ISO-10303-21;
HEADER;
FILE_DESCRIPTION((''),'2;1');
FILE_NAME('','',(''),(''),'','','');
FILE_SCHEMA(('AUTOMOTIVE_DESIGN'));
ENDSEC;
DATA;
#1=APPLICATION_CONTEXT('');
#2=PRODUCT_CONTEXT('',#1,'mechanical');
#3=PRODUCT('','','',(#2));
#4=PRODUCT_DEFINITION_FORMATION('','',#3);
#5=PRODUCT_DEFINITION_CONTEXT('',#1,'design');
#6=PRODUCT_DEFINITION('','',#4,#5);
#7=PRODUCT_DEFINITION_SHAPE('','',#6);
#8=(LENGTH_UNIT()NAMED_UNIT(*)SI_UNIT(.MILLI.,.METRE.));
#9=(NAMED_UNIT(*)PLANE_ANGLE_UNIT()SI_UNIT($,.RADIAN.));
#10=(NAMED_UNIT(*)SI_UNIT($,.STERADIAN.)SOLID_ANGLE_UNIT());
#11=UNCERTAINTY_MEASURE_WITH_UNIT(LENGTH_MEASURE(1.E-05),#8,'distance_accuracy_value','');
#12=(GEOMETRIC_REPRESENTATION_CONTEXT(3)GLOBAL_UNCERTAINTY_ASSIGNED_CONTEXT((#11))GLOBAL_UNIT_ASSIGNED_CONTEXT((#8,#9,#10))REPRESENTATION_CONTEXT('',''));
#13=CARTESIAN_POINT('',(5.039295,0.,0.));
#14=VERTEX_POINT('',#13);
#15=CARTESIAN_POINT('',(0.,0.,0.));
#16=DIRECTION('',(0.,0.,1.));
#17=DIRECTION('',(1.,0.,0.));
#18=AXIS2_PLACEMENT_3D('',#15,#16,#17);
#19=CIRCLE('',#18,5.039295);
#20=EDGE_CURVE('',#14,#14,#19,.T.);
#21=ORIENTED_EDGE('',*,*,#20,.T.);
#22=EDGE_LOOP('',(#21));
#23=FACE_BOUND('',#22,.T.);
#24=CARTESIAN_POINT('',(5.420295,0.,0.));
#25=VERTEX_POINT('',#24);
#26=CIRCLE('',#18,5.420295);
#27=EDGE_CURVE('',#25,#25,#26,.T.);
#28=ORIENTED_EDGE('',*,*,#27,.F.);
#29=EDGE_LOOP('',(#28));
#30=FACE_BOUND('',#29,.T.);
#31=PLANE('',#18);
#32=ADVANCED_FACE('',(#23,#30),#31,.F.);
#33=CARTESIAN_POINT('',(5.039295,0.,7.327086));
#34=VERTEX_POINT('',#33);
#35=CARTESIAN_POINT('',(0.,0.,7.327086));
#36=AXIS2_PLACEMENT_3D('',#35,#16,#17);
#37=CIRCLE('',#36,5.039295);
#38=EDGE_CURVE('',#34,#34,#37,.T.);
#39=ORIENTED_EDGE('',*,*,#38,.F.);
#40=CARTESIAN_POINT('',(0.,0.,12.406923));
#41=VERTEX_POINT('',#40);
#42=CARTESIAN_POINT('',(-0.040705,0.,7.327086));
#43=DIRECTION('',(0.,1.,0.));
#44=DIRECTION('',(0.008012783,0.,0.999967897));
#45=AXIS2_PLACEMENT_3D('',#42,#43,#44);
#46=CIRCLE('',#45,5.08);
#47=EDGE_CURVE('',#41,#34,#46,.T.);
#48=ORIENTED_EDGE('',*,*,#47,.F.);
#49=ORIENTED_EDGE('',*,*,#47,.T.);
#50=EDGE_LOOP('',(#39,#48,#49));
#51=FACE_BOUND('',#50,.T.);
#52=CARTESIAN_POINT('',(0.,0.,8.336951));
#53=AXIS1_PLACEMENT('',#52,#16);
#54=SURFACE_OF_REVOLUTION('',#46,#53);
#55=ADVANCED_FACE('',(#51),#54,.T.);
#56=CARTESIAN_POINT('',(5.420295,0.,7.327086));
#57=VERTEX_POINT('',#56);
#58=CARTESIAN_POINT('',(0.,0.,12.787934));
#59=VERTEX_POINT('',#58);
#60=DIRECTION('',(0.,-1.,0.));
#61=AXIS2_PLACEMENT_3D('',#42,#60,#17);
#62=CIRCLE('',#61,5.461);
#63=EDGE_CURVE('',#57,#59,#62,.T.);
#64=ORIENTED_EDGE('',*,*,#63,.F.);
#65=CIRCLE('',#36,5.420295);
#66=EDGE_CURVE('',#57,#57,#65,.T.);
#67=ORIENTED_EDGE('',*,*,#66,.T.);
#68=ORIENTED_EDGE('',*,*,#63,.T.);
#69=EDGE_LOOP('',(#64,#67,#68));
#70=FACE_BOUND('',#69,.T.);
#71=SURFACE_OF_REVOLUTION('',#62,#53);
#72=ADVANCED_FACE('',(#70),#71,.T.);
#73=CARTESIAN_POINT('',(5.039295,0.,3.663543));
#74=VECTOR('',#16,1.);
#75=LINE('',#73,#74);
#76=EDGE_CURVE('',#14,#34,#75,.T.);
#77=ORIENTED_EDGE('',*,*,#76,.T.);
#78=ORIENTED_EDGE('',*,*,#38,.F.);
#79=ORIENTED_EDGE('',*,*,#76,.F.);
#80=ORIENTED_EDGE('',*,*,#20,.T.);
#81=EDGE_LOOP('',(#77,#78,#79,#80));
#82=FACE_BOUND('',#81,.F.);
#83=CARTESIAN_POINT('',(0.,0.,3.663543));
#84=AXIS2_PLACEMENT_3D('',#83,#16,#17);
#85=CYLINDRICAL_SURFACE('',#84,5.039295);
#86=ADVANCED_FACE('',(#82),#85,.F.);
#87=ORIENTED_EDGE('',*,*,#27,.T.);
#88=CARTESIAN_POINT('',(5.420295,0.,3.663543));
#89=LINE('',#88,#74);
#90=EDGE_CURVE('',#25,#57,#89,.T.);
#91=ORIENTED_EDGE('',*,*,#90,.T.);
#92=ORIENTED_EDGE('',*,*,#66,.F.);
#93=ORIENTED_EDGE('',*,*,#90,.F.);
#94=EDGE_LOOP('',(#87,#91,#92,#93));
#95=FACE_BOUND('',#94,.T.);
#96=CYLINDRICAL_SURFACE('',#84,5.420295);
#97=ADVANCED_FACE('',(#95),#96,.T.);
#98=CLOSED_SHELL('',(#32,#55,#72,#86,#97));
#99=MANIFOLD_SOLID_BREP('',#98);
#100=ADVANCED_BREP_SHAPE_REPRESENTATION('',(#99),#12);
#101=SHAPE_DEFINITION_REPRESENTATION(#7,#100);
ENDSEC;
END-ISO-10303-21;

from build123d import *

# Parameters (mm, degrees)
F0_W = 0.381
F0_H = 7.3270857248


# Not quite as in the source:
# - a feature names something its author has since deleted; it is built from what else it names


with BuildPart() as f1:
    # F0 (on Front) → F1 (revolve)
    with BuildSketch(Plane.XZ):
        with BuildLine():
            ThreePointArc((0, 12.4069226423), (3.5657601658, 10.9047678598), (5.0392950625, 7.3270857248))
            Line((5.0392950625, 7.3270857248), (5.4202950625, 7.3270857248))
            ThreePointArc((5.4202950625, 7.3270857248), (3.8351698453, 11.1741775704), (0, 12.7879340205))
            Line((0, 12.7879340205), (0, 12.4069226423))
        make_face()
        with Locations((5.2297950625, 3.6635428624)):
            Rectangle(F0_W, F0_H)
    revolve(axis=Axis((0, 0, 8.3369510248), (0, 0, 1)))


solid = f1.part
